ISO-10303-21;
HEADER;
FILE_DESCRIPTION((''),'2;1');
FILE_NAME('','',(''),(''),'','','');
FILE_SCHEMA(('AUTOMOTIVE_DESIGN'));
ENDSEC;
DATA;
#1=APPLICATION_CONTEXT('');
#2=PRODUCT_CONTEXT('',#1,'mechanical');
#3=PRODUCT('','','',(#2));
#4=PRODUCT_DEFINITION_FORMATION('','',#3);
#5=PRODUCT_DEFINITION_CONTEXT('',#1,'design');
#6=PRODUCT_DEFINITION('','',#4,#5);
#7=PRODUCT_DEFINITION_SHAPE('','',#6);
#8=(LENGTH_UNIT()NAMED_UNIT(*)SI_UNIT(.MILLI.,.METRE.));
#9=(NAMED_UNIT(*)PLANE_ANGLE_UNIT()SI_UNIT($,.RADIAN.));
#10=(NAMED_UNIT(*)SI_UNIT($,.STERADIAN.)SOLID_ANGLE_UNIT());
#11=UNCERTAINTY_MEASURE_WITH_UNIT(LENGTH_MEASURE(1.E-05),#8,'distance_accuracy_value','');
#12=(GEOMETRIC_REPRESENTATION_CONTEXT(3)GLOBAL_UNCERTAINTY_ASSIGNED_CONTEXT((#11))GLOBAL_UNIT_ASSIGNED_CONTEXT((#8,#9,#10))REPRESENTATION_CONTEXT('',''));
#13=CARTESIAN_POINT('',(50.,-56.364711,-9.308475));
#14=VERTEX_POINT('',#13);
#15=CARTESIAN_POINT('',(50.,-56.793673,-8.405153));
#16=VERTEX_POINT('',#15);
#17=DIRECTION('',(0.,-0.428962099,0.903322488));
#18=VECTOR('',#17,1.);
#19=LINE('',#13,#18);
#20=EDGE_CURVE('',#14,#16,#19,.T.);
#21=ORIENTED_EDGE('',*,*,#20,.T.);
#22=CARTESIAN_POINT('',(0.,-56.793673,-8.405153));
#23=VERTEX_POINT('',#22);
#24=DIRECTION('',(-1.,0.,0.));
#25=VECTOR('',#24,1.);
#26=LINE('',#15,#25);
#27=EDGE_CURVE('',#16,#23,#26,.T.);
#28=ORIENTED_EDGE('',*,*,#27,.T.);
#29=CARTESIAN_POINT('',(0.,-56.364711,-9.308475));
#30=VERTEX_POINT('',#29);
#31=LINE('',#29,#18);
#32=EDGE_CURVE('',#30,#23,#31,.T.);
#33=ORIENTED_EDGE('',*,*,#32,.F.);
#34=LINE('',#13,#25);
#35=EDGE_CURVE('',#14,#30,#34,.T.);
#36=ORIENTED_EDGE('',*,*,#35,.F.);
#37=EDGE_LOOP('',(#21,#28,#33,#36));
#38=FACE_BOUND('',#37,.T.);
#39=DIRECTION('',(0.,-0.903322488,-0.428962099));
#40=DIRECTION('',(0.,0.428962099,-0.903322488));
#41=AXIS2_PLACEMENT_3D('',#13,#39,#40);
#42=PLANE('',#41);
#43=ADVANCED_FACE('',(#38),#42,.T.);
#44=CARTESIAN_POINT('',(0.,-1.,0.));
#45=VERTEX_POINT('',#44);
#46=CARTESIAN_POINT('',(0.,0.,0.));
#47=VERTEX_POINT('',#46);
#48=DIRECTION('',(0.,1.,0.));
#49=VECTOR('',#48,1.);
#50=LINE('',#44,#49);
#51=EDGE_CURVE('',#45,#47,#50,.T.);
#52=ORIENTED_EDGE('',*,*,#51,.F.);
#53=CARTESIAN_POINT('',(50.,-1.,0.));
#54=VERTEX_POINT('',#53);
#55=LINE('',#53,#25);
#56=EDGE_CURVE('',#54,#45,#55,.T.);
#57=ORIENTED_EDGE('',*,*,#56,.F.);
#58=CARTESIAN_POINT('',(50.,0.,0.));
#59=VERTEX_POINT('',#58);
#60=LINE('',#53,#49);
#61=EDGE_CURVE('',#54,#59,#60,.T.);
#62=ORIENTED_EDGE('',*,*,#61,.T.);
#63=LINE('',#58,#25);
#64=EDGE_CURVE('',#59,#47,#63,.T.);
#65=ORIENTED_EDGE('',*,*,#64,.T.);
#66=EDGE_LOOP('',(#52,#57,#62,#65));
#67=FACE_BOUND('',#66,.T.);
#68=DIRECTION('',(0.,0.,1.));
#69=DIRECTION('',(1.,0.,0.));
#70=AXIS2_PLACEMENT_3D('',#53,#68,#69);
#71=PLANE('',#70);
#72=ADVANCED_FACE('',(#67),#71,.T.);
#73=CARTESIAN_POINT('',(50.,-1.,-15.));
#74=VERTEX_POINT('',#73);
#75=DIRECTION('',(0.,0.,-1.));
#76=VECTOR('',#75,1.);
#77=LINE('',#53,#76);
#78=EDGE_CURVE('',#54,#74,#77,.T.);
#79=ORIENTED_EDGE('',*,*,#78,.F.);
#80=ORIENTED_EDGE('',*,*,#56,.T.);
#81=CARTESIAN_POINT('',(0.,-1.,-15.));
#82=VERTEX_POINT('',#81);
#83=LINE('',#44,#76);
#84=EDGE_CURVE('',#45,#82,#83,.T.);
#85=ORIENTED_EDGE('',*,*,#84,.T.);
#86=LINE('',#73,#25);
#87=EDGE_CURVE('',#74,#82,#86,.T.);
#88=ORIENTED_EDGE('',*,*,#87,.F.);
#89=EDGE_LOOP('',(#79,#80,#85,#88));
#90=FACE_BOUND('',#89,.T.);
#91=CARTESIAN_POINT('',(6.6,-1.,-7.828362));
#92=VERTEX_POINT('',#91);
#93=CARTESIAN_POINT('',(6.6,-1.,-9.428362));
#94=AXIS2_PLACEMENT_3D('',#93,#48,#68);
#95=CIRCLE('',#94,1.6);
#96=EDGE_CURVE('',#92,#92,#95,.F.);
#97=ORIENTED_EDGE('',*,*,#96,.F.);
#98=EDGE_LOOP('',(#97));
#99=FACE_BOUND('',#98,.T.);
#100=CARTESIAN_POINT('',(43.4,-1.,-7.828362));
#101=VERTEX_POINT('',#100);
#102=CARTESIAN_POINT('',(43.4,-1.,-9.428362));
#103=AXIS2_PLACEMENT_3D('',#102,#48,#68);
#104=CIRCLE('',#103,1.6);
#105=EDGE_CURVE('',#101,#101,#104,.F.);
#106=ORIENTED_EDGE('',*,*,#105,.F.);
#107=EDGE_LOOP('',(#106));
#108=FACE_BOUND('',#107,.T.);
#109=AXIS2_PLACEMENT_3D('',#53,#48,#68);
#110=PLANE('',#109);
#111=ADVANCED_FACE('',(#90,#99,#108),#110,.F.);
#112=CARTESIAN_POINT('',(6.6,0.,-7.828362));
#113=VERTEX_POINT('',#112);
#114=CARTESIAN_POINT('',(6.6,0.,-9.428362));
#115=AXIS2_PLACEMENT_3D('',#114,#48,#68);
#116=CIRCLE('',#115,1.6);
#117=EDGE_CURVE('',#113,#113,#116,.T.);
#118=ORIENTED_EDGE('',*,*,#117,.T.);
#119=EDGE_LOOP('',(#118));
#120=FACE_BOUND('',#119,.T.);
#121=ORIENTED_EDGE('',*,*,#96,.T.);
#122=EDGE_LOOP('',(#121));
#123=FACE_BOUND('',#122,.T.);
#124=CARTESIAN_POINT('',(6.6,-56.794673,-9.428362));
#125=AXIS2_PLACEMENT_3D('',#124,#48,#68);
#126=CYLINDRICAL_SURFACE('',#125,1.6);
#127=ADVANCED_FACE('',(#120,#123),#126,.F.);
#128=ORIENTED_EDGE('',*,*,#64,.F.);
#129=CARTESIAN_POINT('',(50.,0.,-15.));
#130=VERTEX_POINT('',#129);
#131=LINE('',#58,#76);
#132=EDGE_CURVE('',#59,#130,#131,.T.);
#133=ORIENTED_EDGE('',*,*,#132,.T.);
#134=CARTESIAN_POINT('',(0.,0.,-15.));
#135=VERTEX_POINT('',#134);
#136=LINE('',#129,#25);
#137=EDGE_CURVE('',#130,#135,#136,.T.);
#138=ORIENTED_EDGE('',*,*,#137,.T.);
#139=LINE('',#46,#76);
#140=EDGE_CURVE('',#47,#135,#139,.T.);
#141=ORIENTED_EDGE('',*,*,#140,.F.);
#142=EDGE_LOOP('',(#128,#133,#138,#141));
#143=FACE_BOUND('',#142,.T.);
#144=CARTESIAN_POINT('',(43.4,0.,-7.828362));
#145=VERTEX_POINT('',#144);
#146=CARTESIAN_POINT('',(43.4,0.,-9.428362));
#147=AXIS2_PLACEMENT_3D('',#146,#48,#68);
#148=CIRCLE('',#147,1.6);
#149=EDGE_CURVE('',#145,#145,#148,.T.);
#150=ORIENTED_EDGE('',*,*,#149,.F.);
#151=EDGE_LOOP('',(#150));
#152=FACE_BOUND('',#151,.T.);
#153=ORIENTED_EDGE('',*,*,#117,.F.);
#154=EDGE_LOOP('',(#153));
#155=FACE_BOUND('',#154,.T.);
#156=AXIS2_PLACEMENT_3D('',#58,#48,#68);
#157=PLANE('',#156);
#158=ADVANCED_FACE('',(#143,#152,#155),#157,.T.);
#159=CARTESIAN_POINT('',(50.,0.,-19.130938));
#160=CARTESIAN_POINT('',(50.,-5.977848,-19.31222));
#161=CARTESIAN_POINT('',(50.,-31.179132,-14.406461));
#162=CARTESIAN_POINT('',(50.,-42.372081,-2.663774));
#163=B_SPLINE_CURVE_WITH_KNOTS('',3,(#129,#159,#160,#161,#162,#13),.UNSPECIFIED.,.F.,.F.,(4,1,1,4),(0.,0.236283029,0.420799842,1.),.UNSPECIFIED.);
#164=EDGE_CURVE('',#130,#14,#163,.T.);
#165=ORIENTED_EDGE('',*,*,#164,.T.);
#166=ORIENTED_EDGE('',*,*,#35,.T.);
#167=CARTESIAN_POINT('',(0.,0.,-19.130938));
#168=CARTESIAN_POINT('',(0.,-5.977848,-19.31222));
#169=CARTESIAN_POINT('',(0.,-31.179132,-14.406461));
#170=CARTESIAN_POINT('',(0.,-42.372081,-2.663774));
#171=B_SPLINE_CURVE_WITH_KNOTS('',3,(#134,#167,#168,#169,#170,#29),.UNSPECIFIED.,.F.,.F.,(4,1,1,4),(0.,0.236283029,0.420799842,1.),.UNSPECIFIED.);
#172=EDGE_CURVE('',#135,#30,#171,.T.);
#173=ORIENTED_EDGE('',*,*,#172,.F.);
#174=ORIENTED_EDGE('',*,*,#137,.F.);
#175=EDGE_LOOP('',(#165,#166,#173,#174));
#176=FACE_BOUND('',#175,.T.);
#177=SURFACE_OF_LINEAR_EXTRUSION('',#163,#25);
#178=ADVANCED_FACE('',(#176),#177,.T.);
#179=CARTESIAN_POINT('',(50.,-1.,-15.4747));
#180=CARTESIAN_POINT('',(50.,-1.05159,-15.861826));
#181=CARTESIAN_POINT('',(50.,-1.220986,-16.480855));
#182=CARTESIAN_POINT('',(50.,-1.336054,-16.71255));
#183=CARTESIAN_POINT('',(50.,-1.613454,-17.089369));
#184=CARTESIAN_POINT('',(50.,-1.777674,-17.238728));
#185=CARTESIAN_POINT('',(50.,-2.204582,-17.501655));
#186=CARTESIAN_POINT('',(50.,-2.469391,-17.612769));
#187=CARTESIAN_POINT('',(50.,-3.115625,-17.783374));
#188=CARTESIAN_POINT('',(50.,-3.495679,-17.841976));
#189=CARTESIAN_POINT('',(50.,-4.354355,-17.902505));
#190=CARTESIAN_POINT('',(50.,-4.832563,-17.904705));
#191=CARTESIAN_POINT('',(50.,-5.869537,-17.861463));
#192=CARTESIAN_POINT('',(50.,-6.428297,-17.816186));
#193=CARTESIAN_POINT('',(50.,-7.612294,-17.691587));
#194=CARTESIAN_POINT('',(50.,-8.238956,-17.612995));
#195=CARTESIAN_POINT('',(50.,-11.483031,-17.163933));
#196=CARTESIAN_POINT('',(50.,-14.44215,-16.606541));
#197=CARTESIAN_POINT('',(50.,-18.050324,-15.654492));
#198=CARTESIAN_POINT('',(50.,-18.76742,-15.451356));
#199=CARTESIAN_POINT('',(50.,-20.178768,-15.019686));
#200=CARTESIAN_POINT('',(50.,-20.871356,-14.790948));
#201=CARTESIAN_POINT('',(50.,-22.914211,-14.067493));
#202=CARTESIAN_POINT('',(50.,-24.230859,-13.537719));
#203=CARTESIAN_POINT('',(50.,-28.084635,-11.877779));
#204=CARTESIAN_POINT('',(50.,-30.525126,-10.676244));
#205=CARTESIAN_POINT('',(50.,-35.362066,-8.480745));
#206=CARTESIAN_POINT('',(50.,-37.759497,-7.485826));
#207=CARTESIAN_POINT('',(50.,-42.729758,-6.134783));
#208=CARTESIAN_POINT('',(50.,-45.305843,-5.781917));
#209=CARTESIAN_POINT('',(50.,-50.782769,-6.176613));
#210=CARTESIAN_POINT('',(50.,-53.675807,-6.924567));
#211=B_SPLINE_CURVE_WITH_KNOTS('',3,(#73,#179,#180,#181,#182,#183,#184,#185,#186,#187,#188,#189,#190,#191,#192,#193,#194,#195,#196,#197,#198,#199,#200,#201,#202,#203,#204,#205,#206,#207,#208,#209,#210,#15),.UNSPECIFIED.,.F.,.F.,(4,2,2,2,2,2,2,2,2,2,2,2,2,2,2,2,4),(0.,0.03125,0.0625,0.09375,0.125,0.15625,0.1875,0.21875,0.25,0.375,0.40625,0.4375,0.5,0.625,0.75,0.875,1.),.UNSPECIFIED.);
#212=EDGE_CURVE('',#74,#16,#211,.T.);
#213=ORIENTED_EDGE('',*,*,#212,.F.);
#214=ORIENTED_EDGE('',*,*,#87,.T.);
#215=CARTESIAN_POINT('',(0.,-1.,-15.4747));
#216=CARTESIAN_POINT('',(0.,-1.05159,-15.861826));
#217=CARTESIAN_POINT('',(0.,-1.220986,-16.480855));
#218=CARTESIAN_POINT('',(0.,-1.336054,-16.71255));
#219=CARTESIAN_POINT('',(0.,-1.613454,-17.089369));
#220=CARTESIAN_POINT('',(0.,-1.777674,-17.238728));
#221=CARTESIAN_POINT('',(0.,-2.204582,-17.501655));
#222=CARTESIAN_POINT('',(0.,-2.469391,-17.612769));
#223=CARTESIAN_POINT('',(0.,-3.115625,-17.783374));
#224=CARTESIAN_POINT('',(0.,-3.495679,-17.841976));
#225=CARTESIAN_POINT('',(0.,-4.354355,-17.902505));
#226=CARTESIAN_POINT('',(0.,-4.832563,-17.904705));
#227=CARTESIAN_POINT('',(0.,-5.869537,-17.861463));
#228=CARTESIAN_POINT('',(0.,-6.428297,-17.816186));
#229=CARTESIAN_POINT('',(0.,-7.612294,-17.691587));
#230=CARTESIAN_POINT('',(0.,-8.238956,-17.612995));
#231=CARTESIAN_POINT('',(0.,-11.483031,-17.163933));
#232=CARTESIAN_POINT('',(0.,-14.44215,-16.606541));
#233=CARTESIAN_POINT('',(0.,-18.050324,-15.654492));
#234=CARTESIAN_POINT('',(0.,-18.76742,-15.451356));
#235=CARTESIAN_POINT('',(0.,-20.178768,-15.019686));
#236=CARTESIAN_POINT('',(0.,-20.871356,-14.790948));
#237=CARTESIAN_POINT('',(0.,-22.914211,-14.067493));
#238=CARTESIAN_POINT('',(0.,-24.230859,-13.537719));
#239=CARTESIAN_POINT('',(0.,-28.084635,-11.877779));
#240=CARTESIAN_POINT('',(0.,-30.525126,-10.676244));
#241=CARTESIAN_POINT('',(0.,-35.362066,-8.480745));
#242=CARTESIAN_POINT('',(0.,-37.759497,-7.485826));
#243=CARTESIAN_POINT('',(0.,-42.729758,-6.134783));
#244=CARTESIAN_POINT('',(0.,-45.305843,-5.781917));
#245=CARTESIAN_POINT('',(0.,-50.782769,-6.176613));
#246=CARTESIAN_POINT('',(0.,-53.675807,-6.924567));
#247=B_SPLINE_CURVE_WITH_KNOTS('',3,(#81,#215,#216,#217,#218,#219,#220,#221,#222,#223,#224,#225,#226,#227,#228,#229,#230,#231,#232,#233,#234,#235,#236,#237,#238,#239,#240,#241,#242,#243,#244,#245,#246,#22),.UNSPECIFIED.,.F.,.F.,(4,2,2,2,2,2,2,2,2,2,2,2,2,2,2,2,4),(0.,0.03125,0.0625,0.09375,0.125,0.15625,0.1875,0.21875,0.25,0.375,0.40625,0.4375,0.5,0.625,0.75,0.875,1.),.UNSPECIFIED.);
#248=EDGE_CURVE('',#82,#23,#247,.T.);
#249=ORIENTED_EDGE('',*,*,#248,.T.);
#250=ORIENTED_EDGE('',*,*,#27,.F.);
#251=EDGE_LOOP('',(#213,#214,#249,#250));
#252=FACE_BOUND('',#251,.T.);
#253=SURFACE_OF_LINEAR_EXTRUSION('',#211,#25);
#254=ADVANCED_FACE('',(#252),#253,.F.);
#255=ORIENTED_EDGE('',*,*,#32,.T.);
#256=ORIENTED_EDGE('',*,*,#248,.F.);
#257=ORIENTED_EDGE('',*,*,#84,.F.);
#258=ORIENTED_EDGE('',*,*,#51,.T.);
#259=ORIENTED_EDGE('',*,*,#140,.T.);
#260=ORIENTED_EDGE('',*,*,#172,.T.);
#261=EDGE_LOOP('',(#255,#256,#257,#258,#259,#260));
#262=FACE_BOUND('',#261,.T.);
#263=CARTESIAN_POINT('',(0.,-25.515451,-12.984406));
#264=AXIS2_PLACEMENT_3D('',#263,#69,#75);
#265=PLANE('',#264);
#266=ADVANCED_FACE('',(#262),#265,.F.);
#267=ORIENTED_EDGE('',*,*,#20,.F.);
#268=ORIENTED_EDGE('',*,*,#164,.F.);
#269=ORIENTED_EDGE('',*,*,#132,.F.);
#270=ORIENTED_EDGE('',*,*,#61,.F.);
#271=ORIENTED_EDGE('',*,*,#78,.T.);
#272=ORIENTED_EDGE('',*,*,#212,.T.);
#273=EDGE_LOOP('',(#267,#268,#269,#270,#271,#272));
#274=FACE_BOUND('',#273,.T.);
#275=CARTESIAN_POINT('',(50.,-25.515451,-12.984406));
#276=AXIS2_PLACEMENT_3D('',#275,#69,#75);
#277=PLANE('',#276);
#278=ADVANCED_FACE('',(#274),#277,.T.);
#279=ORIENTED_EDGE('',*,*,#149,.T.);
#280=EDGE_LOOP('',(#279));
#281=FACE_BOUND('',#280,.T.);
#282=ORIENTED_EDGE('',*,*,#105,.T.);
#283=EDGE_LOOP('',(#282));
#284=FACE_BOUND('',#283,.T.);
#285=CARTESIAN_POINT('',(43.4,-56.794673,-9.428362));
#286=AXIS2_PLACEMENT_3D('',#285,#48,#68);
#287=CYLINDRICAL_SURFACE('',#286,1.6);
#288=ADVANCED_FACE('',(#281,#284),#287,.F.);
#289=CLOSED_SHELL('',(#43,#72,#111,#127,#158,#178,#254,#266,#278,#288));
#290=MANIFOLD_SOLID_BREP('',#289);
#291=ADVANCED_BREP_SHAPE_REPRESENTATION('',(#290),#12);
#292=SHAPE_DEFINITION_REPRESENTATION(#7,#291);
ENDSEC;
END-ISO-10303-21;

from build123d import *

# Parameters (mm, degrees)
EXTRUDE_THIN2_DEPTH = 50
CUT_EXTRUDE1_REACH  = 79.991
SKETCH3_R           = 1.6


# Read off the part's stored shape, not the designer's step: Extrude-Thin2
with BuildPart() as part:
    # Extrude-Thin2 outline → Extrude-Thin2 (new body)
    with BuildSketch(Plane(origin=(0, 0, 0), x_dir=(0, 0, -1), z_dir=(1, 0, 0))):
        with BuildLine():
            Line((0, -1), (15, -1))
            add(Edge.make_bspline(
                [(15, -1), (15.47470013, -1), (15.861826032, -1.051589998), (16.480855292, -1.220985667), (16.712550056, -1.336053941), (17.089368537, -1.613453741), (17.238727793, -1.77767428), (17.501655418, -2.204581945), (17.612769335, -2.469390698), (17.783374091, -3.115625013), (17.841976302, -3.495679067), (17.902505292, -4.354355009), (17.904704994, -4.832563181), (17.861462775, -5.869536859), (17.816186167, -6.428296676), (17.691586748, -7.612293875), (17.612995195, -8.238955838), (17.163932748, -11.483031174), (16.606541025, -14.44214967), (15.654491825, -18.050324208), (15.451355727, -18.767419737), (15.019686347, -20.178768294), (14.790947871, -20.871355568), (14.06749291, -22.914211322), (13.537719224, -24.230859394), (11.877778677, -28.084635108), (10.676244262, -30.525126108), (8.480745218, -35.362065845), (7.485826344, -37.759496578), (6.134782684, -42.729757515), (5.781916626, -45.305843109), (6.176613166, -50.78276898), (6.924566965, -53.675807088), (8.40515267, -56.793673131)],
                knots=[0, 0, 0, 0, 0.03125, 0.03125, 0.0625, 0.0625, 0.09375, 0.09375, 0.125, 0.125, 0.15625, 0.15625, 0.1875, 0.1875, 0.21875, 0.21875, 0.25, 0.25, 0.375, 0.375, 0.40625, 0.40625, 0.4375, 0.4375, 0.5, 0.5, 0.625, 0.625, 0.75, 0.75, 0.875, 0.875, 1, 1, 1, 1], degree=3))
            Line((8.40515267, -56.793673131), (9.308475158, -56.364711032))
            add(Edge.make_bspline(
                [(15, 0), (19.130938443, 0), (19.312220409, -5.977847724), (14.406460667, -31.179131787), (2.663773864, -42.372080643), (9.308475158, -56.364711032)],
                knots=[0, 0, 0, 0, 0.236283029, 0.420799842, 1, 1, 1, 1], degree=3))
            Line((15, 0), (0, 0))
            Line((0, 0), (0, -1))
        make_face()
    extrude(amount=EXTRUDE_THIN2_DEPTH)

    # Sketch3 → Cut-Extrude1 (cut, up to next)
    with BuildSketch(Plane(origin=(0, 0, 0), x_dir=(1, 0, 0), z_dir=(0, 1, 0)), mode=Mode.PRIVATE) as cut_extrude1_sk1:
        with Locations(Location((6.6, 9.428361527, 0), (0, 0, 270))):
            Circle(SKETCH3_R)
    cut_extrude1_tool1 = extrude(cut_extrude1_sk1.sketch, amount=-CUT_EXTRUDE1_REACH, mode=Mode.PRIVATE) & part.part
    # Sketch3 → Cut-Extrude1 (cut, up to next)
    with BuildSketch(Plane(origin=(0, 0, 0), x_dir=(1, 0, 0), z_dir=(0, 1, 0)), mode=Mode.PRIVATE) as cut_extrude1_sk2:
        with Locations(Location((43.4, 9.428361527, 0), (0, 0, 270))):
            Circle(SKETCH3_R)
    cut_extrude1_tool2 = extrude(cut_extrude1_sk2.sketch, amount=-CUT_EXTRUDE1_REACH, mode=Mode.PRIVATE) & part.part
    add(cut_extrude1_tool1.solids().sort_by_distance((6.6, 0, -9.428362))[0], mode=Mode.SUBTRACT)
    add(cut_extrude1_tool2.solids().sort_by_distance((43.4, 0, -9.428362))[0], mode=Mode.SUBTRACT)


solid = part.part
